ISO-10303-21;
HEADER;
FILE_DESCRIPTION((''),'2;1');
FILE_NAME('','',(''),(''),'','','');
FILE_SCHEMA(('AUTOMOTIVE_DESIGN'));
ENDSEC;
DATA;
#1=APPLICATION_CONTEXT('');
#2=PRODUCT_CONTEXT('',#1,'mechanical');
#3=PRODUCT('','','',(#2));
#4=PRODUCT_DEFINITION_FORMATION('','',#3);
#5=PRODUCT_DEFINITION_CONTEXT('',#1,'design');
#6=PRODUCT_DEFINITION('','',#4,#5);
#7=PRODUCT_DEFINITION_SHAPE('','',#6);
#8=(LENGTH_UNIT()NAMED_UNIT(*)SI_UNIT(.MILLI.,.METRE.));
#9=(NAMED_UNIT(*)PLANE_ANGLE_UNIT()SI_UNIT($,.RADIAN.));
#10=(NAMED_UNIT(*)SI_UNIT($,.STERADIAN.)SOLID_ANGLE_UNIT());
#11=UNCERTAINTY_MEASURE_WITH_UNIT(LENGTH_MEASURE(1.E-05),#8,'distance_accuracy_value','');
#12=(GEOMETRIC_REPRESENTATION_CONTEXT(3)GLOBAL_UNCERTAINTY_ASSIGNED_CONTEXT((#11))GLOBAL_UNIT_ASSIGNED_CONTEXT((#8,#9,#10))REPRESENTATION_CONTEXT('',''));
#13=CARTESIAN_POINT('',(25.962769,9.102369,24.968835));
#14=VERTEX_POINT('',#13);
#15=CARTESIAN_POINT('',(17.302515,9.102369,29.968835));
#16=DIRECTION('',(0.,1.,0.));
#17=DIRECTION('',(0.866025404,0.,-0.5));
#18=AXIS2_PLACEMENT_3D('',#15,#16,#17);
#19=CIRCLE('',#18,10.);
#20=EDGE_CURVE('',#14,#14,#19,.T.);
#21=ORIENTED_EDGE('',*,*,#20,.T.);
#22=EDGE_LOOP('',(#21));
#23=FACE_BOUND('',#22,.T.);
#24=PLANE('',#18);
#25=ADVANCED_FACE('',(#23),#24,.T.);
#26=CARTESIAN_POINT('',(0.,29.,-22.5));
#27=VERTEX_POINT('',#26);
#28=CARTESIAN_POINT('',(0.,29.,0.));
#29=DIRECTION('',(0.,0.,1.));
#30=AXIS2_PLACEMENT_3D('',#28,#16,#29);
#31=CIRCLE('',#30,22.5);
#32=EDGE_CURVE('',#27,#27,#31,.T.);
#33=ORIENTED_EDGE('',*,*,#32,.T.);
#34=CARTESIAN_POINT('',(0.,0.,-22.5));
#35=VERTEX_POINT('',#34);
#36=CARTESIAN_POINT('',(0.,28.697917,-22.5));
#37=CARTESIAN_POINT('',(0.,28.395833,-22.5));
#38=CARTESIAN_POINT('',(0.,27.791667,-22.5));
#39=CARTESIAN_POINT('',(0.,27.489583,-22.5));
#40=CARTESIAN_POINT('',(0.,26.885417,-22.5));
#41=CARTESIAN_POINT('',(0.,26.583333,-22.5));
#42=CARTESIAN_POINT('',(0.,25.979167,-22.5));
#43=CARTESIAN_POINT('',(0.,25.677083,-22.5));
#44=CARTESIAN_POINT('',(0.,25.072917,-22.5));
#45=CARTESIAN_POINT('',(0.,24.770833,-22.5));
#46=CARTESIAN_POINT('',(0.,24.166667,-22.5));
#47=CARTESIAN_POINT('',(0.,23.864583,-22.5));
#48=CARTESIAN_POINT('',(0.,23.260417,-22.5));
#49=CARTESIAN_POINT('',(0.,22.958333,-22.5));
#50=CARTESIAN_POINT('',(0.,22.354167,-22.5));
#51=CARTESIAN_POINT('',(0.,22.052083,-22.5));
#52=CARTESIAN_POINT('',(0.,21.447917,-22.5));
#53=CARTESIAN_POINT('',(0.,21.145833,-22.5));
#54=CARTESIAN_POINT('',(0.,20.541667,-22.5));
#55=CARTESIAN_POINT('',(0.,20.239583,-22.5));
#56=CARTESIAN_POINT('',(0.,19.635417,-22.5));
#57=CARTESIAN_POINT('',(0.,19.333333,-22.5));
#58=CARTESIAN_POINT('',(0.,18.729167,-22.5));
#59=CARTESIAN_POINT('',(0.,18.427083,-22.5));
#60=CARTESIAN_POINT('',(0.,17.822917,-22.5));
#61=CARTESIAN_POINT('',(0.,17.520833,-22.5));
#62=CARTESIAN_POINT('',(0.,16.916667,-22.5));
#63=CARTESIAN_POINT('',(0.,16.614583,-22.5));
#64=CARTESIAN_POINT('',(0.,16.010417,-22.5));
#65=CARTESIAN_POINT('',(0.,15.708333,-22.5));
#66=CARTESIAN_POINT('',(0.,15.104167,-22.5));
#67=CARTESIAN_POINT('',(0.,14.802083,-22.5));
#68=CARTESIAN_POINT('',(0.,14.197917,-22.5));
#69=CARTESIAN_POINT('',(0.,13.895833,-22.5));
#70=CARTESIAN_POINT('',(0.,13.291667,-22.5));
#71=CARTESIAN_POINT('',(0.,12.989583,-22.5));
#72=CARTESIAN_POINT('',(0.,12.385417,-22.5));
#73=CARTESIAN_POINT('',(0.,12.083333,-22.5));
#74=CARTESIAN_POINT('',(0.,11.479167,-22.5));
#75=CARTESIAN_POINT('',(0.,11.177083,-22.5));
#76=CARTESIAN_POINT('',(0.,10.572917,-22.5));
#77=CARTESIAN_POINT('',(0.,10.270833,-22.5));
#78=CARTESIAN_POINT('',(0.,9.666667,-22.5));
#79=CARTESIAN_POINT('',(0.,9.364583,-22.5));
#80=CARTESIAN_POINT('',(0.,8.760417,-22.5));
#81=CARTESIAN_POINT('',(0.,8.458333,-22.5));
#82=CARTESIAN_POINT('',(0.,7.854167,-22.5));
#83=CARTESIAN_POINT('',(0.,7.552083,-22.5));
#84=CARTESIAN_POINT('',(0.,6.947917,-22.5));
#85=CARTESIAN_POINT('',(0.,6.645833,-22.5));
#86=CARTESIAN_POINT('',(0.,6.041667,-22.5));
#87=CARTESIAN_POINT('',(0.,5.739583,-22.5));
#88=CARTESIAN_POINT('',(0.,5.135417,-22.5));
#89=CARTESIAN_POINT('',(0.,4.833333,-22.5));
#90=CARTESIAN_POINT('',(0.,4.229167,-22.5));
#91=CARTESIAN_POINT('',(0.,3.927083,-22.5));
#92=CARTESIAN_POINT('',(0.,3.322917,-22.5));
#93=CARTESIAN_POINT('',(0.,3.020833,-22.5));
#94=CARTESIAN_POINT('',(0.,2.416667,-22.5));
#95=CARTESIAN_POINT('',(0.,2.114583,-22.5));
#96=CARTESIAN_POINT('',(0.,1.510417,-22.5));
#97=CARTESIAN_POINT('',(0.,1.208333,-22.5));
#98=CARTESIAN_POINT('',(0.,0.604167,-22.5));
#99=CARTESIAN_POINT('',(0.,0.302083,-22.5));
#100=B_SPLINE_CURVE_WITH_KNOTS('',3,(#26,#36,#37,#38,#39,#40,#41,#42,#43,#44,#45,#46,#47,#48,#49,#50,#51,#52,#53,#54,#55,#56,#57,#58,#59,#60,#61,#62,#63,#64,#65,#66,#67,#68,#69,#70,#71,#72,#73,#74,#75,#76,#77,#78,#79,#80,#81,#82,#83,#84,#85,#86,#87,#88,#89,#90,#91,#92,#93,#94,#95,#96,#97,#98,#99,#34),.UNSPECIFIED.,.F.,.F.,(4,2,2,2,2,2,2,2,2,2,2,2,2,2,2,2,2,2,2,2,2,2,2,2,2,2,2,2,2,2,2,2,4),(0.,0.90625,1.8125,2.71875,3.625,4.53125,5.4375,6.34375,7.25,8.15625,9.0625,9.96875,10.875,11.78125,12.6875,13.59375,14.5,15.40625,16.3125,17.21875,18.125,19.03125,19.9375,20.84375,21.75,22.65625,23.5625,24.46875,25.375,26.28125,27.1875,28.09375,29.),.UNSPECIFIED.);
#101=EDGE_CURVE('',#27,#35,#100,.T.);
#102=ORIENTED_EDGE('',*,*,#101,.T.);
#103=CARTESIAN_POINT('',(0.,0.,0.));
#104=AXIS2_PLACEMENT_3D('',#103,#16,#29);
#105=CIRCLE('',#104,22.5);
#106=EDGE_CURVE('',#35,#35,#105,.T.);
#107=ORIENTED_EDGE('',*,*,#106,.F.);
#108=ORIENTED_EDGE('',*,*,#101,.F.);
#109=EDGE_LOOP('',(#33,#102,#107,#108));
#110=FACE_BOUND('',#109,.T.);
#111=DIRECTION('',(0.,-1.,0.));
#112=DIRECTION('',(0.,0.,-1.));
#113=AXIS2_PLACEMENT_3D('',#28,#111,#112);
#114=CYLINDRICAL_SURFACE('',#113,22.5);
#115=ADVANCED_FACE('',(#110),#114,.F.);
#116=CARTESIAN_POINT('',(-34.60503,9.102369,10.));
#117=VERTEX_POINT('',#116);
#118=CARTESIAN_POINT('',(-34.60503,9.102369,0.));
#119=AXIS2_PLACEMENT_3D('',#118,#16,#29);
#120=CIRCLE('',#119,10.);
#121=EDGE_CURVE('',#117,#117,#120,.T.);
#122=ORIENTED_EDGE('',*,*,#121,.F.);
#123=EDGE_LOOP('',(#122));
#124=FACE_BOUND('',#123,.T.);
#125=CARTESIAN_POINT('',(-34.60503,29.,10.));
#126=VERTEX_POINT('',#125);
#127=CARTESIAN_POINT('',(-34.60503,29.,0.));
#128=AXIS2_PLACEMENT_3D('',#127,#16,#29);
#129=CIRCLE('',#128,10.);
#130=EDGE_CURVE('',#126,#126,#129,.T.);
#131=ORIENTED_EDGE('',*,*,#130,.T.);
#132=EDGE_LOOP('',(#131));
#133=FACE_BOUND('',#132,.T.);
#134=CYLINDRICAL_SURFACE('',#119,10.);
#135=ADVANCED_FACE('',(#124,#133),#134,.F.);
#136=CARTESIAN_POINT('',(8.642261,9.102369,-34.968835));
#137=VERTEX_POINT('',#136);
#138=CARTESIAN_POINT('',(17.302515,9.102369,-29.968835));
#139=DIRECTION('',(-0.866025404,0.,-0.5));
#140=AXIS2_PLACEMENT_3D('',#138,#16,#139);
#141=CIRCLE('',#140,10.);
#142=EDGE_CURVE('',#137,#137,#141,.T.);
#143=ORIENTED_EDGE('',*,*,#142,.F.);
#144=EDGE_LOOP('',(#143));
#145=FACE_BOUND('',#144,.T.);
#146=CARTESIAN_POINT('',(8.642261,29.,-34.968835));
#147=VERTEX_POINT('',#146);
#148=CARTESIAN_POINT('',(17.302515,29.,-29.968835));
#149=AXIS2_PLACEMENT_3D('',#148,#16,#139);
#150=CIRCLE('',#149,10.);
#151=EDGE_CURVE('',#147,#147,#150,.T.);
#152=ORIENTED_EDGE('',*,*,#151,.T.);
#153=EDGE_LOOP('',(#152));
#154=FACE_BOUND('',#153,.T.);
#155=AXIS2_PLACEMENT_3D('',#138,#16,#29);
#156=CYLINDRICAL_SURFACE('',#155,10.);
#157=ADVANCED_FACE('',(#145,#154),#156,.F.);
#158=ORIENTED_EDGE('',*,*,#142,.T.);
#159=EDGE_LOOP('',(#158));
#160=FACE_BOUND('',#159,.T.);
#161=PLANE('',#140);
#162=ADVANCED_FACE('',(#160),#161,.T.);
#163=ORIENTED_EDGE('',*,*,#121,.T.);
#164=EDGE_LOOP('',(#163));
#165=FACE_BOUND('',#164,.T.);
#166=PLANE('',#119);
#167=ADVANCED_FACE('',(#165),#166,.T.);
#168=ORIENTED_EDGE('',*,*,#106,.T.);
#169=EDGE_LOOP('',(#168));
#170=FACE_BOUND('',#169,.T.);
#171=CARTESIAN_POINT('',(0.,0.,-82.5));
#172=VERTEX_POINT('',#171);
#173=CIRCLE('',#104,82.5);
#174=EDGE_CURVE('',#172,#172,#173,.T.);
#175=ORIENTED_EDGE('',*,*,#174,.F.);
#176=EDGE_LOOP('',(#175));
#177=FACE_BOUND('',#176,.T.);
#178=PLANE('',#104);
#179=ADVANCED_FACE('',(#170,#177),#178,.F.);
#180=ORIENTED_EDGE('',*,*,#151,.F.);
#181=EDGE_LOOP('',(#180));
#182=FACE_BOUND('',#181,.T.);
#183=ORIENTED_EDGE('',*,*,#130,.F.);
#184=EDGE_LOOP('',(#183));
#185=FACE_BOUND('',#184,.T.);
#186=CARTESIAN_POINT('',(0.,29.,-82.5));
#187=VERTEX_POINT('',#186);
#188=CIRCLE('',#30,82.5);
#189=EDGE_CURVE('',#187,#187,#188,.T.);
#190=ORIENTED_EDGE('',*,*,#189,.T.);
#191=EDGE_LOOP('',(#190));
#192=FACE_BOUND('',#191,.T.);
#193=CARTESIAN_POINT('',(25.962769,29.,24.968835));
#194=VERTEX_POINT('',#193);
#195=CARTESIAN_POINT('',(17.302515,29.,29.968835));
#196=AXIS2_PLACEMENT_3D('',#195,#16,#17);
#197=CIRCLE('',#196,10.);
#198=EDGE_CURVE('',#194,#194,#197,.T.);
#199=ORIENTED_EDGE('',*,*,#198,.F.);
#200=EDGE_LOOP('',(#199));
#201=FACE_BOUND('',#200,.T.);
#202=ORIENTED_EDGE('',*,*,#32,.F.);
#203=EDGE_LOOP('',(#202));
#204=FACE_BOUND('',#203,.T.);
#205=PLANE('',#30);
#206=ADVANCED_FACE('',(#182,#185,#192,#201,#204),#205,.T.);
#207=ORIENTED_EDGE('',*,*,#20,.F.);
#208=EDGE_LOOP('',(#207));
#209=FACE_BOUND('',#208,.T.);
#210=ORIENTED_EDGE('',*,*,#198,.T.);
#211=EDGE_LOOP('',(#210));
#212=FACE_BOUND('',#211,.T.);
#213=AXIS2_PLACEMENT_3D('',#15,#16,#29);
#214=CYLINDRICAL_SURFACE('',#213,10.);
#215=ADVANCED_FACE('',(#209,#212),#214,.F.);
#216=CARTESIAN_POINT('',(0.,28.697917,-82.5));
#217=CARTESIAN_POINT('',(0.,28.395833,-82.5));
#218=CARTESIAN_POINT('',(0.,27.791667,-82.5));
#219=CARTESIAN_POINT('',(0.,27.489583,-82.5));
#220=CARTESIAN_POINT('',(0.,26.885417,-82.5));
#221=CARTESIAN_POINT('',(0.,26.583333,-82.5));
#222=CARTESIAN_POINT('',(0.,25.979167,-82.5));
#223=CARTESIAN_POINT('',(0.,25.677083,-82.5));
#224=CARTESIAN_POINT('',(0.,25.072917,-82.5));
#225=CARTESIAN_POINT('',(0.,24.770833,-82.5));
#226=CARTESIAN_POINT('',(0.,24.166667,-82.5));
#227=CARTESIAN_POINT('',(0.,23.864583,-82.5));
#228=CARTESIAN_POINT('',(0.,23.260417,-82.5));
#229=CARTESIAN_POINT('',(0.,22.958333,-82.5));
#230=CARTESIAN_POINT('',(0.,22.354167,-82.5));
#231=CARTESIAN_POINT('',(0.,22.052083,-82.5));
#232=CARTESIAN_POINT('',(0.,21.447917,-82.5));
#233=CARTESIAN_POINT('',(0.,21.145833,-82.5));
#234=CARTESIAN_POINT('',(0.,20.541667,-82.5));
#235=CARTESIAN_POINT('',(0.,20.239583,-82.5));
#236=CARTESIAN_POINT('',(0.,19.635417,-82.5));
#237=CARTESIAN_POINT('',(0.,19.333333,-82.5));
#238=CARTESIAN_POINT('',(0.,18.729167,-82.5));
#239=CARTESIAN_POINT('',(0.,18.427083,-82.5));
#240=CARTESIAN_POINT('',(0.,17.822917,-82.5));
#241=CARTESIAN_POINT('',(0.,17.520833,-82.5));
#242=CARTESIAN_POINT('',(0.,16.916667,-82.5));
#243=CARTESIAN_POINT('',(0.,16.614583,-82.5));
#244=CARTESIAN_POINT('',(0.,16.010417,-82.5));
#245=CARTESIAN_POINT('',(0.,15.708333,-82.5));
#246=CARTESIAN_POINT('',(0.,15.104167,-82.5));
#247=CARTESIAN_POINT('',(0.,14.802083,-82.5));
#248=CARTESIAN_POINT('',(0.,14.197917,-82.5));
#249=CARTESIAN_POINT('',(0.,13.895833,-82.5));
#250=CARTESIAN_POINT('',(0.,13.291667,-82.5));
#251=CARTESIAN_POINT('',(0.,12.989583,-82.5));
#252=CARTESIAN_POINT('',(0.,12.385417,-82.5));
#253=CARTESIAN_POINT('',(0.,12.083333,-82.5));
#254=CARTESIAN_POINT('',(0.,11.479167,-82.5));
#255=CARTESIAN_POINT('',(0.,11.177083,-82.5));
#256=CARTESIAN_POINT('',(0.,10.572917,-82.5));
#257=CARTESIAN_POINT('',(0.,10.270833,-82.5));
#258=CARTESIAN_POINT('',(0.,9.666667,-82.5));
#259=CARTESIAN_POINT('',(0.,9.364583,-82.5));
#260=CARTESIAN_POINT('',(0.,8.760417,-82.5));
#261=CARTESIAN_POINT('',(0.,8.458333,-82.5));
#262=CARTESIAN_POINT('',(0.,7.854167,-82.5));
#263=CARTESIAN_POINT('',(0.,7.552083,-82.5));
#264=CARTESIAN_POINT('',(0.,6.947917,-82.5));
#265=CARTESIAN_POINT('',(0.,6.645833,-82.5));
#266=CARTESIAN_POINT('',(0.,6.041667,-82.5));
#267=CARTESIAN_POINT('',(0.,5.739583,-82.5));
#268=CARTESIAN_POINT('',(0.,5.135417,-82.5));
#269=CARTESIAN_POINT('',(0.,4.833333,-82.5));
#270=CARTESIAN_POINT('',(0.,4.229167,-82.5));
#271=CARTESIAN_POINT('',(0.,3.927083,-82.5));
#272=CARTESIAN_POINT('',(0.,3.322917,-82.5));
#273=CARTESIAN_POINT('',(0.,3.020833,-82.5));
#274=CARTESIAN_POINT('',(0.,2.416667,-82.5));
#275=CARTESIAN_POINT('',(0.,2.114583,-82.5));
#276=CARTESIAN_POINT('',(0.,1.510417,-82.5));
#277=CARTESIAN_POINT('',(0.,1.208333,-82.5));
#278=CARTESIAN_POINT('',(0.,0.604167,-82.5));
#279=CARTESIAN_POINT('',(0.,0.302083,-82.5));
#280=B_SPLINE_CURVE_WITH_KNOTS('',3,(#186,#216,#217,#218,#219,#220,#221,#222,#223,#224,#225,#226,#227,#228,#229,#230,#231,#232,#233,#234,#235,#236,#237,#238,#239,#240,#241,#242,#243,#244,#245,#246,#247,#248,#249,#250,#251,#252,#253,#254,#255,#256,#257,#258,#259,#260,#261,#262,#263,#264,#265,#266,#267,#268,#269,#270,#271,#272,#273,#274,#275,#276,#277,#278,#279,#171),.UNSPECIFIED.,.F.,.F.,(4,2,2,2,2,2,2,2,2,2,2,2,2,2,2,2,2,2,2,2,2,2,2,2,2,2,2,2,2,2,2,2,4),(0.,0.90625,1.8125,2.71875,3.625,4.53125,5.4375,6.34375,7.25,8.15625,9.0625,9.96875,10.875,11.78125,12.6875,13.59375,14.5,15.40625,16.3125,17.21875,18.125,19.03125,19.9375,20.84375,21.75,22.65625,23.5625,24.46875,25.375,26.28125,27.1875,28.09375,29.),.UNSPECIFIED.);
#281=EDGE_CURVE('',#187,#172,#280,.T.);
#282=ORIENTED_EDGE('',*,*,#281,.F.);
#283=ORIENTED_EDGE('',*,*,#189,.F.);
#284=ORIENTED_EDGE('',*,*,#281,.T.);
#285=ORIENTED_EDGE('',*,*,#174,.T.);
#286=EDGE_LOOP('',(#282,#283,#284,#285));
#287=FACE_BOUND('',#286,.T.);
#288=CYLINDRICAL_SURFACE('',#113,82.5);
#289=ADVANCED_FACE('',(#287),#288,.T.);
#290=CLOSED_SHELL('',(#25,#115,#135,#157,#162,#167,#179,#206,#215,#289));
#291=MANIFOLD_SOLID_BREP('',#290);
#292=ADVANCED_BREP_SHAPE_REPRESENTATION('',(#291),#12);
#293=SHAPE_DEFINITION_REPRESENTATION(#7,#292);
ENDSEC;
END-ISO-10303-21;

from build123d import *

# Parameters (mm, degrees)
SKETCH1_R           = 82.5
BOSS_EXTRUDE1_DEPTH = 29
SKETCH2_R           = 22.5
CUT_EXTRUDE1_DEPTH  = 121.222710001
SKETCH3_R           = 10
CUT_EXTRUDE2_DEPTH  = 19.897631285
CIRPATTERN1_COUNT   = 3


with BuildPart() as part:
    # Sketch1 → Boss-Extrude1 (new body)
    with BuildSketch(Plane(origin=(0, 0, 0), x_dir=(1, 0, 0), z_dir=(0, 1, 0))):
        Circle(SKETCH1_R)
    extrude(amount=BOSS_EXTRUDE1_DEPTH)

    # Sketch2 → Cut-Extrude1 (cut, through all)
    with BuildSketch(Plane(origin=(0, 0, 0), x_dir=(1, 0, 0), z_dir=(0, 1, 0))):
        Circle(SKETCH2_R)
    extrude(amount=CUT_EXTRUDE1_DEPTH, mode=Mode.SUBTRACT)

    # Sketch3 → Cut-Extrude2 (cut)
    with BuildSketch(Plane(origin=(0, 29, 0), x_dir=(1, 0, 0), z_dir=(0, 1, 0))):
        with Locations((-34.605029939, 0)):
            Circle(SKETCH3_R)
    cut_extrude2 = extrude(amount=-CUT_EXTRUDE2_DEPTH, mode=Mode.SUBTRACT)

    # CirPattern1: Cut-Extrude2 ×3 about axis
    cirpattern1_axis = Axis((0, 0, 0), (0, 1, 0))
    for i in range(1, CIRPATTERN1_COUNT):
        add(cut_extrude2.rotate(cirpattern1_axis, i * 360 / CIRPATTERN1_COUNT), mode=Mode.SUBTRACT)


solid = part.part
